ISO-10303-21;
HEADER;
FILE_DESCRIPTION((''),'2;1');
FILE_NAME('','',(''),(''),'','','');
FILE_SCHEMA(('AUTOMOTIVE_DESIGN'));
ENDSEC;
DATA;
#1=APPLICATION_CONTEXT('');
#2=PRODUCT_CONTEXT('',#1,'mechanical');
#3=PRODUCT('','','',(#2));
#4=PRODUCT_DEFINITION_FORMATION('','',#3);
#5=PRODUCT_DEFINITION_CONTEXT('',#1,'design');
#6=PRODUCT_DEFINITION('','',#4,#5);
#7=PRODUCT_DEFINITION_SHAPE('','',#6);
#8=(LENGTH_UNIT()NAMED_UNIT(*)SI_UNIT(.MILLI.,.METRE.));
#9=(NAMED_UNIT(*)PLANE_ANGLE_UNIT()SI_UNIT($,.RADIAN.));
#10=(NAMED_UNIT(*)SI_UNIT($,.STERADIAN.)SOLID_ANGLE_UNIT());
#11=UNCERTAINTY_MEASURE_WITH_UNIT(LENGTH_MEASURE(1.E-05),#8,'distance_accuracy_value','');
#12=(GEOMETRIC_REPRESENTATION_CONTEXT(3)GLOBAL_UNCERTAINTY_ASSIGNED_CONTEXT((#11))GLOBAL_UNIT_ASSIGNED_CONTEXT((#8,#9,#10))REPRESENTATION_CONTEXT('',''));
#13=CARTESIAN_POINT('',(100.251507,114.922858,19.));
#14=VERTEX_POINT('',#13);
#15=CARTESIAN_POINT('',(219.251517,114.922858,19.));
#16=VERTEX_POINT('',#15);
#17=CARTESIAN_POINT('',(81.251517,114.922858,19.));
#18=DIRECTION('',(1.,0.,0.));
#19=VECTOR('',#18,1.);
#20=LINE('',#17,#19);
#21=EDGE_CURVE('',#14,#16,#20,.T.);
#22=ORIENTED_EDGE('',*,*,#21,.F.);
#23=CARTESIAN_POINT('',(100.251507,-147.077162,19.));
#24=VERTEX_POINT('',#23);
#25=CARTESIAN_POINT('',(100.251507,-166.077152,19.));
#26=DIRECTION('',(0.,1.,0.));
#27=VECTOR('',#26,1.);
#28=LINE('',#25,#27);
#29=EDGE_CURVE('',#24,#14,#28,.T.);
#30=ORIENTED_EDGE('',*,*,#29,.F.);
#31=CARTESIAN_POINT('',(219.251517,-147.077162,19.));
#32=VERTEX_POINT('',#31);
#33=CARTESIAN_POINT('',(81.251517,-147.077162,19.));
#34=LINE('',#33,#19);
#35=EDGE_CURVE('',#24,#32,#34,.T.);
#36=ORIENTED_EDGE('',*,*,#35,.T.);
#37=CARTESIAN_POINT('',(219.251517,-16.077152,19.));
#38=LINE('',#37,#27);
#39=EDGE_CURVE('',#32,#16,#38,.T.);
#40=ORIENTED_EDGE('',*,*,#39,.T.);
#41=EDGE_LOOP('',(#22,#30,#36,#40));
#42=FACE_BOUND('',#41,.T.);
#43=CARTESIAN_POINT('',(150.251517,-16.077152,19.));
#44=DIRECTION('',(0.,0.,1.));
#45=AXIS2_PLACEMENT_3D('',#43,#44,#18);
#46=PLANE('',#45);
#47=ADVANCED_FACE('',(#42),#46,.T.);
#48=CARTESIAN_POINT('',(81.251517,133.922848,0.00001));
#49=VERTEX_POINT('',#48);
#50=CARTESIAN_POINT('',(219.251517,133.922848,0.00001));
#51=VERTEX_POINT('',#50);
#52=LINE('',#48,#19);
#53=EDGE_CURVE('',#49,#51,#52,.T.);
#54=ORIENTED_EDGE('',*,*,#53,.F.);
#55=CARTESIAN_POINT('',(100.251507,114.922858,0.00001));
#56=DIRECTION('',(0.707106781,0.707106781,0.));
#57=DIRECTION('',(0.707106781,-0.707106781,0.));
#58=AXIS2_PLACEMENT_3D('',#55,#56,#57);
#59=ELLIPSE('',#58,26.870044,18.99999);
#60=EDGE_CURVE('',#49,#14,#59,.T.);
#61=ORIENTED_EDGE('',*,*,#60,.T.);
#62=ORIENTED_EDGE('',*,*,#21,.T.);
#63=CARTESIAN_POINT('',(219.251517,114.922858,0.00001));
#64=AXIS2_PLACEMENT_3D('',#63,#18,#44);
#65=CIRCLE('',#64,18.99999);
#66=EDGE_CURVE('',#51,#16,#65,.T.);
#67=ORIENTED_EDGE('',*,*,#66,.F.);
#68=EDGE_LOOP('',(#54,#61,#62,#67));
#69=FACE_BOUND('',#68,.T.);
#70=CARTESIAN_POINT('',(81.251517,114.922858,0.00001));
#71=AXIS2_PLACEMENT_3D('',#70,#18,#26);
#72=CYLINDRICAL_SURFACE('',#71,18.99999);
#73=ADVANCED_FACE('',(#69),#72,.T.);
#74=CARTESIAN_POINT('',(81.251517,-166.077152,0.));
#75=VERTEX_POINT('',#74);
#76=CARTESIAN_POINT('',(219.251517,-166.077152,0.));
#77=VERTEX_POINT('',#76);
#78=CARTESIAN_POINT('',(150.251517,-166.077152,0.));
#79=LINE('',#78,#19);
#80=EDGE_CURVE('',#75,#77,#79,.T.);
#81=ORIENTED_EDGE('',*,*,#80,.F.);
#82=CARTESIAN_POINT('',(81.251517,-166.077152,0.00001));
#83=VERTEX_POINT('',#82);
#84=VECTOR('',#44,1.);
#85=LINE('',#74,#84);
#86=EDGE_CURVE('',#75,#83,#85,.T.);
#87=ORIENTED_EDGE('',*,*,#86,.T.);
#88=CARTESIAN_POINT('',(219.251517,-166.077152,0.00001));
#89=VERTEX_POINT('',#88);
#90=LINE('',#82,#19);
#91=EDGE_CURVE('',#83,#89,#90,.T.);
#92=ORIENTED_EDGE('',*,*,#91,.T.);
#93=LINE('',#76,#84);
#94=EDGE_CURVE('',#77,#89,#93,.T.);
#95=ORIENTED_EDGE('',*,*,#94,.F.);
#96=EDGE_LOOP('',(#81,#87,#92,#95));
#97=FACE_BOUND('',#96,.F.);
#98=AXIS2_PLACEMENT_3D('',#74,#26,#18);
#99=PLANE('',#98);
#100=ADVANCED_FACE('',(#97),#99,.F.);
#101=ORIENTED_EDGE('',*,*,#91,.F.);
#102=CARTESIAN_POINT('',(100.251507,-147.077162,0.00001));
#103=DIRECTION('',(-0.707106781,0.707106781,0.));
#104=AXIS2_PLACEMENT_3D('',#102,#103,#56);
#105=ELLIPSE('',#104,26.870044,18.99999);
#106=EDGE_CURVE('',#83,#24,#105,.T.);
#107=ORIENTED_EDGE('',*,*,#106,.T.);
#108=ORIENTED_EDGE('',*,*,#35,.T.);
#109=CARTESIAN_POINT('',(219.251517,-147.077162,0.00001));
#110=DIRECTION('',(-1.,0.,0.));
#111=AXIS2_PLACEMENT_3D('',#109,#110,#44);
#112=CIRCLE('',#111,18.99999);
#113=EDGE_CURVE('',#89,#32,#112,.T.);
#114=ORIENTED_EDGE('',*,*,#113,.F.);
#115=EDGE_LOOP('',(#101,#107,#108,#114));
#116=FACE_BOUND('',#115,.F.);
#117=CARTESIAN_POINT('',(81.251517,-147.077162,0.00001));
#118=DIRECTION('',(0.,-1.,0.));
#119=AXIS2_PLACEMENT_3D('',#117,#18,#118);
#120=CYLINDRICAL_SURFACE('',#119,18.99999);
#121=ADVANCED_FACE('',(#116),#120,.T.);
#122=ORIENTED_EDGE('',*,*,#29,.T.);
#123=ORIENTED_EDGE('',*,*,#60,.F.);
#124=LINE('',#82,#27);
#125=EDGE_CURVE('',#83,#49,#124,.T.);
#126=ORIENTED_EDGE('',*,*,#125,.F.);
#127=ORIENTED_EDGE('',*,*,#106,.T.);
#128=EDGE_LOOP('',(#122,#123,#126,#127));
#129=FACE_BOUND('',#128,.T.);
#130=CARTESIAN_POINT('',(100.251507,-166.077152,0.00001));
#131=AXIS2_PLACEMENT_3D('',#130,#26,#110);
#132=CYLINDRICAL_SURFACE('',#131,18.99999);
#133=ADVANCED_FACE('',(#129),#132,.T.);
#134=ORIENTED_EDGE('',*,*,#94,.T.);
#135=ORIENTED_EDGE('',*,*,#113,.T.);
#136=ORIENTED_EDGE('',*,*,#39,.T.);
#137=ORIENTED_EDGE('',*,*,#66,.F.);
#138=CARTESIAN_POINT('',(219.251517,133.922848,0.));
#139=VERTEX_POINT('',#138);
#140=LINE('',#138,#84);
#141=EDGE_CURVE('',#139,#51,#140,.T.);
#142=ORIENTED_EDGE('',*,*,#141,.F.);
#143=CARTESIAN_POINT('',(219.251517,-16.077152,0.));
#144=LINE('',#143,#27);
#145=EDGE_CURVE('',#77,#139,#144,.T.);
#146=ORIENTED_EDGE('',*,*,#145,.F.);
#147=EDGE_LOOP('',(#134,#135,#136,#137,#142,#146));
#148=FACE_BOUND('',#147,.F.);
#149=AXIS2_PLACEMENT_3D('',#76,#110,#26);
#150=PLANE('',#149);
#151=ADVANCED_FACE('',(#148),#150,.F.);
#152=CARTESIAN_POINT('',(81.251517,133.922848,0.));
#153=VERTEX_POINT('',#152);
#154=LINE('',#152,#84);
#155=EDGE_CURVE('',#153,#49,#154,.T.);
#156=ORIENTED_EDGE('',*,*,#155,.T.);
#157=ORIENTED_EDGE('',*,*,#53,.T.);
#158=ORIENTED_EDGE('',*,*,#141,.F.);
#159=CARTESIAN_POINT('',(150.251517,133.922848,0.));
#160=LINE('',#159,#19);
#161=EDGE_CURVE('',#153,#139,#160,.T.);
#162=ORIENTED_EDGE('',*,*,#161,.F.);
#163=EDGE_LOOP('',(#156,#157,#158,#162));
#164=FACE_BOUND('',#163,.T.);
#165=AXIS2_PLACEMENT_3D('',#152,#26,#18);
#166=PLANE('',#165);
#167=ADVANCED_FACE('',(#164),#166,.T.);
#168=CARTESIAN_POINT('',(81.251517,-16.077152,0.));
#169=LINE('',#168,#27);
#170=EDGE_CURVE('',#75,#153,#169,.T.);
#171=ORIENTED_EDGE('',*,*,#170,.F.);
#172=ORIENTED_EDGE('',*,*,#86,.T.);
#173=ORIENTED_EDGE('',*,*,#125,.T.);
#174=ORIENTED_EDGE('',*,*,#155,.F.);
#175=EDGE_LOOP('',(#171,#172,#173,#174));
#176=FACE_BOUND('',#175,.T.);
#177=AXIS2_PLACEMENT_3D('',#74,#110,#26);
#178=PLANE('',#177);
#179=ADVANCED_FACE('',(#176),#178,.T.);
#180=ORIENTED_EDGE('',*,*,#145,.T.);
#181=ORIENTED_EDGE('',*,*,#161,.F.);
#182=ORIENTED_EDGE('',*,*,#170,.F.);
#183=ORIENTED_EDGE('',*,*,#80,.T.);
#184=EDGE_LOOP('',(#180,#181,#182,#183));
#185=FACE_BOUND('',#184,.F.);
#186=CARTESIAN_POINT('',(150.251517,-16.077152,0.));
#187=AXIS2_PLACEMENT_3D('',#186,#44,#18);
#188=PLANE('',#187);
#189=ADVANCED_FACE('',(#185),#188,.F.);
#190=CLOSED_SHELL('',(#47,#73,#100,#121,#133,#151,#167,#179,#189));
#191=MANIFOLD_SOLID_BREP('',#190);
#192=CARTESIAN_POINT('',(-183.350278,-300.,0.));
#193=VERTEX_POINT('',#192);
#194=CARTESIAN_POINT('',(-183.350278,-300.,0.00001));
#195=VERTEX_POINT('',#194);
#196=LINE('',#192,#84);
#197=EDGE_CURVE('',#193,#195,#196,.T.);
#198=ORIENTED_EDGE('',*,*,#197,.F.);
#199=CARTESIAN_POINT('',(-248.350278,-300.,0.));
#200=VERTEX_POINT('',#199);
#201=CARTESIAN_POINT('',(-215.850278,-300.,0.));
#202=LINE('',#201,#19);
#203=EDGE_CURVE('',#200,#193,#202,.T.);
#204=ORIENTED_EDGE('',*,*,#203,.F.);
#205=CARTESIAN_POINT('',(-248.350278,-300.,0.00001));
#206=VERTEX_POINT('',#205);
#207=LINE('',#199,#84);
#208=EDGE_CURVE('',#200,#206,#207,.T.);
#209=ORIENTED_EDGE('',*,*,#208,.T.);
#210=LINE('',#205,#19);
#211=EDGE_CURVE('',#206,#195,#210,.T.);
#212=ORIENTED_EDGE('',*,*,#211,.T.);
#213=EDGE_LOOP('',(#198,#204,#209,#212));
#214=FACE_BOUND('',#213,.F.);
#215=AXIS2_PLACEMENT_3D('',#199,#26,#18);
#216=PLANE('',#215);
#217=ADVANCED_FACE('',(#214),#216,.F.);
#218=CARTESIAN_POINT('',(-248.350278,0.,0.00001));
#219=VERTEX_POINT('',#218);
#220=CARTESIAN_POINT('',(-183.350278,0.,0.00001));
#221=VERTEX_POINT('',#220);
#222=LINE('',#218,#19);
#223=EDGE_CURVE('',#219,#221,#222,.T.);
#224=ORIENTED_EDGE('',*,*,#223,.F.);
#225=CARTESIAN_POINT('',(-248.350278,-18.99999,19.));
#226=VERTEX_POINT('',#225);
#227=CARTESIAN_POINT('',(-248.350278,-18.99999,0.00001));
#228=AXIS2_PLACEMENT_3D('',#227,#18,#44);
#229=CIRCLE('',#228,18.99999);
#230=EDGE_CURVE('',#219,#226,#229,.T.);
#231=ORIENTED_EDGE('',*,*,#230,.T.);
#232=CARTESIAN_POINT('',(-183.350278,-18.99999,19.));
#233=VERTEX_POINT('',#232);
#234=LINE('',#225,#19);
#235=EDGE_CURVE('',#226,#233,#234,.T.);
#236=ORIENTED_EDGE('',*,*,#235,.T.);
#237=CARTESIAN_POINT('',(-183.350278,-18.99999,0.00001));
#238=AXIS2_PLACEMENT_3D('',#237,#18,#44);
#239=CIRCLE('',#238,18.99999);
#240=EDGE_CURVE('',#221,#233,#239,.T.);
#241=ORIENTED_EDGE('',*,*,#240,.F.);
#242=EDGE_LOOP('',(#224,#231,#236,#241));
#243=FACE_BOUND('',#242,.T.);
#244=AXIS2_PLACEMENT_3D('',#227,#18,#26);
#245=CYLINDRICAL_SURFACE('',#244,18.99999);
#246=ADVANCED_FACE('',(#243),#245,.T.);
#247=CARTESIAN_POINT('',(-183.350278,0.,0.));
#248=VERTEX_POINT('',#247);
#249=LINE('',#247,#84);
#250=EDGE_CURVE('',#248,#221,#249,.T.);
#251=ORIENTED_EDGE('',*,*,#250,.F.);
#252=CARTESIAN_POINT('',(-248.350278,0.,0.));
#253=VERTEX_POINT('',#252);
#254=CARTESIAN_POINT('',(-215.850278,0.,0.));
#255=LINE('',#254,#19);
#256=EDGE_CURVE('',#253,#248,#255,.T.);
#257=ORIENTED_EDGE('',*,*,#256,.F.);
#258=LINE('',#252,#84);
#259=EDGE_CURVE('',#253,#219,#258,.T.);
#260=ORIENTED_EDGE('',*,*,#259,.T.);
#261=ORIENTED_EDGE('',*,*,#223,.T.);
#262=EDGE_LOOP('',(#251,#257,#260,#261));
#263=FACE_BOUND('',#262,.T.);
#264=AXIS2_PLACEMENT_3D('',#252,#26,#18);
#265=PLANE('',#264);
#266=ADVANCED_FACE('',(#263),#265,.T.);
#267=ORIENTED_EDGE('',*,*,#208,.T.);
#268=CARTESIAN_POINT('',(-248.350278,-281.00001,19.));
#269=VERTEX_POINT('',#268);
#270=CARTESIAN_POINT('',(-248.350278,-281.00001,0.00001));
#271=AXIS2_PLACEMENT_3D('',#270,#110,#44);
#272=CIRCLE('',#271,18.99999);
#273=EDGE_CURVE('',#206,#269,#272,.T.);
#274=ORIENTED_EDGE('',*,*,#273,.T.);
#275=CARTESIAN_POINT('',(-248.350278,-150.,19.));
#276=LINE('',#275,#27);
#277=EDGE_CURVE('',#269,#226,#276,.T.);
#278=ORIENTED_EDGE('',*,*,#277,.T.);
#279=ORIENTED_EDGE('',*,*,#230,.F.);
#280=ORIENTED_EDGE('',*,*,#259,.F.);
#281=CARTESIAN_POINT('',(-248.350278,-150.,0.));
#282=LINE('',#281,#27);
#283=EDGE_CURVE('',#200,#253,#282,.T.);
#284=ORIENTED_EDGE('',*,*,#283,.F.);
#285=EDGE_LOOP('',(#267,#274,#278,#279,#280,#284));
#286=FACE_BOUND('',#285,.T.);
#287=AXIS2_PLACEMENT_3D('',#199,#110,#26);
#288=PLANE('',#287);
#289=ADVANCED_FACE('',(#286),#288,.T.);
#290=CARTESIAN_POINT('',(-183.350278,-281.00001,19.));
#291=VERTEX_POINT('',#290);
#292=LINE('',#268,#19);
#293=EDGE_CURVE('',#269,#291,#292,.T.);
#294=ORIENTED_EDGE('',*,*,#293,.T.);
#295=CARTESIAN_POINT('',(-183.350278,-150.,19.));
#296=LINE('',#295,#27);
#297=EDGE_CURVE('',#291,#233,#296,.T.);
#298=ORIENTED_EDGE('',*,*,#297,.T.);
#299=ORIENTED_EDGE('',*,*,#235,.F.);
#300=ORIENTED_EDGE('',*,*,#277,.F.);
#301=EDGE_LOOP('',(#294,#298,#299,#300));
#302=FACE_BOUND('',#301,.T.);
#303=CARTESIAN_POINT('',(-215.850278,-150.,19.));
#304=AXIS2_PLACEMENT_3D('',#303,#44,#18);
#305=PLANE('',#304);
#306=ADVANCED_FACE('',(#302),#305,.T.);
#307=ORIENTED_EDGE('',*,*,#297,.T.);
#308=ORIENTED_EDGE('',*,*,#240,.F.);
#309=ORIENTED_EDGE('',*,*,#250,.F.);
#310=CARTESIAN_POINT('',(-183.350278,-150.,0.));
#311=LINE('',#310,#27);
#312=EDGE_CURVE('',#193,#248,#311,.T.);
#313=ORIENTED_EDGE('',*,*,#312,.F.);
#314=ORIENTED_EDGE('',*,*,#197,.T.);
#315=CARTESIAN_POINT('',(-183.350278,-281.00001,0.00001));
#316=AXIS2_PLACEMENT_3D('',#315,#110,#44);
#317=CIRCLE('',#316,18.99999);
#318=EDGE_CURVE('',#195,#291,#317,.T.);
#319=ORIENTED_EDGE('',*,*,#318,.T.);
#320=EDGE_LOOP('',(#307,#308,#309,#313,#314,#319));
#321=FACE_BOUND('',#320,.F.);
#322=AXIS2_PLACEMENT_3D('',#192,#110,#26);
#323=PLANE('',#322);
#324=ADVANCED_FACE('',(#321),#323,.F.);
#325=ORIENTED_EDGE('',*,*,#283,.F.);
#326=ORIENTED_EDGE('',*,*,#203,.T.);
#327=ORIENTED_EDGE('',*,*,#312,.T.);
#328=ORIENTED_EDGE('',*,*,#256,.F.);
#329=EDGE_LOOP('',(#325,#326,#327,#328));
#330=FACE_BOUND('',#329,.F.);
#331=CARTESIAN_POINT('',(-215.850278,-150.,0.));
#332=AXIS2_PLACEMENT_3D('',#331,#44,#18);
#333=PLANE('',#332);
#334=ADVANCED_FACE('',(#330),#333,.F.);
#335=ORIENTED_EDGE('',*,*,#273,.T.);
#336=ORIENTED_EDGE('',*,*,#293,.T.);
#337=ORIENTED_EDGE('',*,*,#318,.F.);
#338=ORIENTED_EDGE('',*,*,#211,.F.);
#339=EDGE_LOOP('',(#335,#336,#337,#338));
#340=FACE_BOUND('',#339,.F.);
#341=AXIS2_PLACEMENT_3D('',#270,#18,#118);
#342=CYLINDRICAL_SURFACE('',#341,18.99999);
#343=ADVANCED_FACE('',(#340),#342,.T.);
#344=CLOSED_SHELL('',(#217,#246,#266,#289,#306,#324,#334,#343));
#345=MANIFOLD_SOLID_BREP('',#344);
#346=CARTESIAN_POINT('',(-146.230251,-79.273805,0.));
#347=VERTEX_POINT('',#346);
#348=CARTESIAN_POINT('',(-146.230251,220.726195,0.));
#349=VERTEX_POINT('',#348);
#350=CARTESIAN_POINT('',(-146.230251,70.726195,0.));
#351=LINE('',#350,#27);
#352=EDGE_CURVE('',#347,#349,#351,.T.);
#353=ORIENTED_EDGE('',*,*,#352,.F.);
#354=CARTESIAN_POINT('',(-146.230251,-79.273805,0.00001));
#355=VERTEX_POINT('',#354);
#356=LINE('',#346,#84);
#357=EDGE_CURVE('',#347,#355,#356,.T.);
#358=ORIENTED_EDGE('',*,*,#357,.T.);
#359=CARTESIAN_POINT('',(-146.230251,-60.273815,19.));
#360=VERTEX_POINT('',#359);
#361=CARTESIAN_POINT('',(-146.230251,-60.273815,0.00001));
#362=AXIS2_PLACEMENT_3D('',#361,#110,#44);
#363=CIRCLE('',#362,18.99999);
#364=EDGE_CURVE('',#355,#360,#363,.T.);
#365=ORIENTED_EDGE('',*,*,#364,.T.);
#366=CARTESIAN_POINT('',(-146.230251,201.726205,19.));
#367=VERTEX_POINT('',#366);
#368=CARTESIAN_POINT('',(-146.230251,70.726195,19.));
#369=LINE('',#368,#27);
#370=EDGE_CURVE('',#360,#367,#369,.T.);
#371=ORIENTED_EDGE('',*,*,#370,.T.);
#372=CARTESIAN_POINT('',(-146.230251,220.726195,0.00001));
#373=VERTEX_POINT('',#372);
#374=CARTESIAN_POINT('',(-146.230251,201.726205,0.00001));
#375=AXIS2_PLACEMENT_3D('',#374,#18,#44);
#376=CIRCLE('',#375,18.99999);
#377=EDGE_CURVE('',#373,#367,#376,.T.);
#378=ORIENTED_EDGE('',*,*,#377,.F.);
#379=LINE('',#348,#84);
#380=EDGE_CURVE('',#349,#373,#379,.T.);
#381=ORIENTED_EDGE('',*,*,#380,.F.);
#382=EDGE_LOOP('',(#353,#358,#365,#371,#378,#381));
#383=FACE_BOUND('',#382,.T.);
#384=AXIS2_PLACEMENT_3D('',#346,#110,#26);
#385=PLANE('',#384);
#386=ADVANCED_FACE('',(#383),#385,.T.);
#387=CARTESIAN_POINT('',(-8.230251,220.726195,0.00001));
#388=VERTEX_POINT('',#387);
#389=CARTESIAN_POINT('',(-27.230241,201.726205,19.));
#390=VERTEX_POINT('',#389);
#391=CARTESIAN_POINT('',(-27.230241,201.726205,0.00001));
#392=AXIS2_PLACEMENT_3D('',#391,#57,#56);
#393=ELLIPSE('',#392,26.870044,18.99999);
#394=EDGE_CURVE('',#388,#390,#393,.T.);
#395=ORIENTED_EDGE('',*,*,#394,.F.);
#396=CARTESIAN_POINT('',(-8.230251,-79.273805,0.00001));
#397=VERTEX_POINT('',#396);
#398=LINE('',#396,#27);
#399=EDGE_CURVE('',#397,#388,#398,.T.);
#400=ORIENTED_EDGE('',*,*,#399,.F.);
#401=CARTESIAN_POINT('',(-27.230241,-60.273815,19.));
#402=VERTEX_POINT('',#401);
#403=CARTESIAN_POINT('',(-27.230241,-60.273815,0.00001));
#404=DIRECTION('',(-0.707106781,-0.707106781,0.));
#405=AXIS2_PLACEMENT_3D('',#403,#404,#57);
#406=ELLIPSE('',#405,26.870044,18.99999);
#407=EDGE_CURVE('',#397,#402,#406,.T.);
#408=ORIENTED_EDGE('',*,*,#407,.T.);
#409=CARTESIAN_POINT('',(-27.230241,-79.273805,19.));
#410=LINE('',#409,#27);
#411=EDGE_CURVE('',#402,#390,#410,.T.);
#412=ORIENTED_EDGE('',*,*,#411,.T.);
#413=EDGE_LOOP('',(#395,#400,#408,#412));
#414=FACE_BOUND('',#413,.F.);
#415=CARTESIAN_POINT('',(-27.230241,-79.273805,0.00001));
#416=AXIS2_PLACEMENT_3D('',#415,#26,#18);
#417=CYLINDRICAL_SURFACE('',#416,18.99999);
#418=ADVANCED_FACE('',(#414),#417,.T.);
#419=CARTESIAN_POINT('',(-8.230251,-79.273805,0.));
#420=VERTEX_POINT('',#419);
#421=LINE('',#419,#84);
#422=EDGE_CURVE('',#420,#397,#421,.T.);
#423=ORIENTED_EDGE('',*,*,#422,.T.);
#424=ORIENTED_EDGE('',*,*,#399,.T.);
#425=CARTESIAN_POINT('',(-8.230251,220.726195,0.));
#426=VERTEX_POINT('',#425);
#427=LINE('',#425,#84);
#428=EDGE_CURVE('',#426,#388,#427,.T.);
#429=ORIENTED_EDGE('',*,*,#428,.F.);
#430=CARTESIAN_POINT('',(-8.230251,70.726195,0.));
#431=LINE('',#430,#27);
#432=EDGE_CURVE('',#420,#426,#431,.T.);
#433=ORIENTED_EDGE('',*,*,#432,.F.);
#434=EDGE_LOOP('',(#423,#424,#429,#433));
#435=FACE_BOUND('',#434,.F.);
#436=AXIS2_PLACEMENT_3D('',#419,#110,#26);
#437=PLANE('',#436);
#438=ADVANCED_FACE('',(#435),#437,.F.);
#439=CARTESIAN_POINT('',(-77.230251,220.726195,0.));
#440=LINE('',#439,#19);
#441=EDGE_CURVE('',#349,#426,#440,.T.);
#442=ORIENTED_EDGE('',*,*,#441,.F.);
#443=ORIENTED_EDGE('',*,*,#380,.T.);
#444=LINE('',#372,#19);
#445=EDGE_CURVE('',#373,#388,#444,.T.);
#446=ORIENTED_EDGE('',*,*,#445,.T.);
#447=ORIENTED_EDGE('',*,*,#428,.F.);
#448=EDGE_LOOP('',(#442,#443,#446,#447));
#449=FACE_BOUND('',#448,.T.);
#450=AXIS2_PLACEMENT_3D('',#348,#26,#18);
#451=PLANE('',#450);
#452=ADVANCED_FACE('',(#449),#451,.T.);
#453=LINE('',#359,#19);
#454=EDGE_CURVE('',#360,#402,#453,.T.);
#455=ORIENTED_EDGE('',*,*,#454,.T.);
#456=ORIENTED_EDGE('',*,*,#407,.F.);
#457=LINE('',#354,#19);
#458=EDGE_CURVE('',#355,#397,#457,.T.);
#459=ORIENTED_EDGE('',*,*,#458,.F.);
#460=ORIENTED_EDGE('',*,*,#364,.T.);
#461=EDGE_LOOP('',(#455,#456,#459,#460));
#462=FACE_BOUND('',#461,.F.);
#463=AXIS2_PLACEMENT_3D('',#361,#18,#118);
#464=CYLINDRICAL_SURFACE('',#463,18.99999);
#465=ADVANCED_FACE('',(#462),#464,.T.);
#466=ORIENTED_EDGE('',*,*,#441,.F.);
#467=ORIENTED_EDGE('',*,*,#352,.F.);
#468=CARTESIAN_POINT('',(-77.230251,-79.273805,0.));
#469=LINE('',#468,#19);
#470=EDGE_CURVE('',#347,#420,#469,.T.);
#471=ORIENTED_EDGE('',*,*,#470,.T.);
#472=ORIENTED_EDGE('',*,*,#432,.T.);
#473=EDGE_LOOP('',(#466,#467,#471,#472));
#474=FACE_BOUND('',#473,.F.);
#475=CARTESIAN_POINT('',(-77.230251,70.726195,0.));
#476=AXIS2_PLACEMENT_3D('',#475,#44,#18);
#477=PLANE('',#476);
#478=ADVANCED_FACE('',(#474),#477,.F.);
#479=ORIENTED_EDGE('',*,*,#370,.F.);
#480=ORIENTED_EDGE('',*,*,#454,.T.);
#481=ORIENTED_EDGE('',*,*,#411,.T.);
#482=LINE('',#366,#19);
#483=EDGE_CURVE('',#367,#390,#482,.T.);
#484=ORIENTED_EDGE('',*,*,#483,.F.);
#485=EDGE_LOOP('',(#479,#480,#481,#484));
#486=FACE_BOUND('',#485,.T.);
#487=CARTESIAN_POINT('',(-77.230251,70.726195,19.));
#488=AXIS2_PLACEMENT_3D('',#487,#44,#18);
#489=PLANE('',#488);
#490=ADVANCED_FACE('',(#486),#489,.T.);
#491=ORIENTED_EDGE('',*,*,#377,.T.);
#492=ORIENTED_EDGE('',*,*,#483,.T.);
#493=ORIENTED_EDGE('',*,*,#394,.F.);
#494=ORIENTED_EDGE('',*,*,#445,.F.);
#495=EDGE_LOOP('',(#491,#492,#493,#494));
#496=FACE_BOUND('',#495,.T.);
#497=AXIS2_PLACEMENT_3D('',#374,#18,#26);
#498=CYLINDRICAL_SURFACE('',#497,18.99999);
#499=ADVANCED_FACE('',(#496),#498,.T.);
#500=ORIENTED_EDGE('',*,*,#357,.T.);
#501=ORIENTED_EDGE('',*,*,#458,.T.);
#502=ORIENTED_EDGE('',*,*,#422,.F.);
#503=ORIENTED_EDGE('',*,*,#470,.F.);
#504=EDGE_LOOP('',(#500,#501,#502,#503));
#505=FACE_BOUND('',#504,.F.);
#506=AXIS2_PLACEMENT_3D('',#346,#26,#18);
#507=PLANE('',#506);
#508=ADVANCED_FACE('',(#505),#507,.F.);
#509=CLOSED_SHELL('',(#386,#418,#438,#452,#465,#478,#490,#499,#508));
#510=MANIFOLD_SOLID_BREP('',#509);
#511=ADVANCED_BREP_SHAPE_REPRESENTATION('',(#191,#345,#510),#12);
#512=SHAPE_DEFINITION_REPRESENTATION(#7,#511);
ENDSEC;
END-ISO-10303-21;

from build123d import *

# Parameters (mm, degrees)
F0_W     = 138
F0_H     = 300
F1_DEPTH = 19
F2_W     = 65
F2_H     = 300
F3_DEPTH = 19
F4_W     = 138
F4_H     = 300
F5_DEPTH = 19
F6_R     = 18.99999
F6_2_R   = 18.99999
F6_3_R   = 18.99999


# Not quite as in the source:
# - a fillet or chamfer is up to 0.001 mm smaller than in the source, because OpenCascade refuses the exact size


with BuildPart() as f1:
    # F0 (on Top) → F1 (new body)
    with BuildSketch(Plane.XY):
        with Locations((-77.230250597, 70.7261949778)):
            Rectangle(F0_W, F0_H)
    extrude(amount=F1_DEPTH)

    # F6#2 (radius 19 in the source; OpenCascade refuses exactly that, so slightly less here)
    f6_2_edges = [f1.edges().sort_by_distance(p)[0] for p in [
        (-77.230251, -79.273805, 19),
        (-8.230251, 70.726195, 19),
        (-77.230251, 220.726195, 19),
    ]]
    fillet(f6_2_edges, radius=F6_2_R)


with BuildPart() as f3:
    # F2 (on Top) → F3 (new body)
    with BuildSketch(Plane.XY):
        with Locations((-215.8502775431, -150)):
            Rectangle(F2_W, F2_H)
    extrude(amount=F3_DEPTH)

    # F6 (radius 19 in the source; OpenCascade refuses exactly that, so slightly less here)
    f6_edges = [f3.edges().sort_by_distance(p)[0] for p in [
        (-215.850278, 0, 19),
        (-215.850278, -300, 19),
    ]]
    fillet(f6_edges, radius=F6_R)


with BuildPart() as f5:
    # F4 (on Top) → F5 (new body)
    with BuildSketch(Plane.XY):
        with Locations((150.2515169382, -16.0771518946)):
            Rectangle(F4_W, F4_H)
    extrude(amount=F5_DEPTH)

    # F6#3 (radius 19 in the source; OpenCascade refuses exactly that, so slightly less here)
    f6_3_edges = [f5.edges().sort_by_distance(p)[0] for p in [
        (150.251517, 133.922848, 19),
        (81.251517, -16.077152, 19),
        (150.251517, -166.077152, 19),
    ]]
    fillet(f6_3_edges, radius=F6_3_R)


solid = Compound([f1.part, f3.part, f5.part])
